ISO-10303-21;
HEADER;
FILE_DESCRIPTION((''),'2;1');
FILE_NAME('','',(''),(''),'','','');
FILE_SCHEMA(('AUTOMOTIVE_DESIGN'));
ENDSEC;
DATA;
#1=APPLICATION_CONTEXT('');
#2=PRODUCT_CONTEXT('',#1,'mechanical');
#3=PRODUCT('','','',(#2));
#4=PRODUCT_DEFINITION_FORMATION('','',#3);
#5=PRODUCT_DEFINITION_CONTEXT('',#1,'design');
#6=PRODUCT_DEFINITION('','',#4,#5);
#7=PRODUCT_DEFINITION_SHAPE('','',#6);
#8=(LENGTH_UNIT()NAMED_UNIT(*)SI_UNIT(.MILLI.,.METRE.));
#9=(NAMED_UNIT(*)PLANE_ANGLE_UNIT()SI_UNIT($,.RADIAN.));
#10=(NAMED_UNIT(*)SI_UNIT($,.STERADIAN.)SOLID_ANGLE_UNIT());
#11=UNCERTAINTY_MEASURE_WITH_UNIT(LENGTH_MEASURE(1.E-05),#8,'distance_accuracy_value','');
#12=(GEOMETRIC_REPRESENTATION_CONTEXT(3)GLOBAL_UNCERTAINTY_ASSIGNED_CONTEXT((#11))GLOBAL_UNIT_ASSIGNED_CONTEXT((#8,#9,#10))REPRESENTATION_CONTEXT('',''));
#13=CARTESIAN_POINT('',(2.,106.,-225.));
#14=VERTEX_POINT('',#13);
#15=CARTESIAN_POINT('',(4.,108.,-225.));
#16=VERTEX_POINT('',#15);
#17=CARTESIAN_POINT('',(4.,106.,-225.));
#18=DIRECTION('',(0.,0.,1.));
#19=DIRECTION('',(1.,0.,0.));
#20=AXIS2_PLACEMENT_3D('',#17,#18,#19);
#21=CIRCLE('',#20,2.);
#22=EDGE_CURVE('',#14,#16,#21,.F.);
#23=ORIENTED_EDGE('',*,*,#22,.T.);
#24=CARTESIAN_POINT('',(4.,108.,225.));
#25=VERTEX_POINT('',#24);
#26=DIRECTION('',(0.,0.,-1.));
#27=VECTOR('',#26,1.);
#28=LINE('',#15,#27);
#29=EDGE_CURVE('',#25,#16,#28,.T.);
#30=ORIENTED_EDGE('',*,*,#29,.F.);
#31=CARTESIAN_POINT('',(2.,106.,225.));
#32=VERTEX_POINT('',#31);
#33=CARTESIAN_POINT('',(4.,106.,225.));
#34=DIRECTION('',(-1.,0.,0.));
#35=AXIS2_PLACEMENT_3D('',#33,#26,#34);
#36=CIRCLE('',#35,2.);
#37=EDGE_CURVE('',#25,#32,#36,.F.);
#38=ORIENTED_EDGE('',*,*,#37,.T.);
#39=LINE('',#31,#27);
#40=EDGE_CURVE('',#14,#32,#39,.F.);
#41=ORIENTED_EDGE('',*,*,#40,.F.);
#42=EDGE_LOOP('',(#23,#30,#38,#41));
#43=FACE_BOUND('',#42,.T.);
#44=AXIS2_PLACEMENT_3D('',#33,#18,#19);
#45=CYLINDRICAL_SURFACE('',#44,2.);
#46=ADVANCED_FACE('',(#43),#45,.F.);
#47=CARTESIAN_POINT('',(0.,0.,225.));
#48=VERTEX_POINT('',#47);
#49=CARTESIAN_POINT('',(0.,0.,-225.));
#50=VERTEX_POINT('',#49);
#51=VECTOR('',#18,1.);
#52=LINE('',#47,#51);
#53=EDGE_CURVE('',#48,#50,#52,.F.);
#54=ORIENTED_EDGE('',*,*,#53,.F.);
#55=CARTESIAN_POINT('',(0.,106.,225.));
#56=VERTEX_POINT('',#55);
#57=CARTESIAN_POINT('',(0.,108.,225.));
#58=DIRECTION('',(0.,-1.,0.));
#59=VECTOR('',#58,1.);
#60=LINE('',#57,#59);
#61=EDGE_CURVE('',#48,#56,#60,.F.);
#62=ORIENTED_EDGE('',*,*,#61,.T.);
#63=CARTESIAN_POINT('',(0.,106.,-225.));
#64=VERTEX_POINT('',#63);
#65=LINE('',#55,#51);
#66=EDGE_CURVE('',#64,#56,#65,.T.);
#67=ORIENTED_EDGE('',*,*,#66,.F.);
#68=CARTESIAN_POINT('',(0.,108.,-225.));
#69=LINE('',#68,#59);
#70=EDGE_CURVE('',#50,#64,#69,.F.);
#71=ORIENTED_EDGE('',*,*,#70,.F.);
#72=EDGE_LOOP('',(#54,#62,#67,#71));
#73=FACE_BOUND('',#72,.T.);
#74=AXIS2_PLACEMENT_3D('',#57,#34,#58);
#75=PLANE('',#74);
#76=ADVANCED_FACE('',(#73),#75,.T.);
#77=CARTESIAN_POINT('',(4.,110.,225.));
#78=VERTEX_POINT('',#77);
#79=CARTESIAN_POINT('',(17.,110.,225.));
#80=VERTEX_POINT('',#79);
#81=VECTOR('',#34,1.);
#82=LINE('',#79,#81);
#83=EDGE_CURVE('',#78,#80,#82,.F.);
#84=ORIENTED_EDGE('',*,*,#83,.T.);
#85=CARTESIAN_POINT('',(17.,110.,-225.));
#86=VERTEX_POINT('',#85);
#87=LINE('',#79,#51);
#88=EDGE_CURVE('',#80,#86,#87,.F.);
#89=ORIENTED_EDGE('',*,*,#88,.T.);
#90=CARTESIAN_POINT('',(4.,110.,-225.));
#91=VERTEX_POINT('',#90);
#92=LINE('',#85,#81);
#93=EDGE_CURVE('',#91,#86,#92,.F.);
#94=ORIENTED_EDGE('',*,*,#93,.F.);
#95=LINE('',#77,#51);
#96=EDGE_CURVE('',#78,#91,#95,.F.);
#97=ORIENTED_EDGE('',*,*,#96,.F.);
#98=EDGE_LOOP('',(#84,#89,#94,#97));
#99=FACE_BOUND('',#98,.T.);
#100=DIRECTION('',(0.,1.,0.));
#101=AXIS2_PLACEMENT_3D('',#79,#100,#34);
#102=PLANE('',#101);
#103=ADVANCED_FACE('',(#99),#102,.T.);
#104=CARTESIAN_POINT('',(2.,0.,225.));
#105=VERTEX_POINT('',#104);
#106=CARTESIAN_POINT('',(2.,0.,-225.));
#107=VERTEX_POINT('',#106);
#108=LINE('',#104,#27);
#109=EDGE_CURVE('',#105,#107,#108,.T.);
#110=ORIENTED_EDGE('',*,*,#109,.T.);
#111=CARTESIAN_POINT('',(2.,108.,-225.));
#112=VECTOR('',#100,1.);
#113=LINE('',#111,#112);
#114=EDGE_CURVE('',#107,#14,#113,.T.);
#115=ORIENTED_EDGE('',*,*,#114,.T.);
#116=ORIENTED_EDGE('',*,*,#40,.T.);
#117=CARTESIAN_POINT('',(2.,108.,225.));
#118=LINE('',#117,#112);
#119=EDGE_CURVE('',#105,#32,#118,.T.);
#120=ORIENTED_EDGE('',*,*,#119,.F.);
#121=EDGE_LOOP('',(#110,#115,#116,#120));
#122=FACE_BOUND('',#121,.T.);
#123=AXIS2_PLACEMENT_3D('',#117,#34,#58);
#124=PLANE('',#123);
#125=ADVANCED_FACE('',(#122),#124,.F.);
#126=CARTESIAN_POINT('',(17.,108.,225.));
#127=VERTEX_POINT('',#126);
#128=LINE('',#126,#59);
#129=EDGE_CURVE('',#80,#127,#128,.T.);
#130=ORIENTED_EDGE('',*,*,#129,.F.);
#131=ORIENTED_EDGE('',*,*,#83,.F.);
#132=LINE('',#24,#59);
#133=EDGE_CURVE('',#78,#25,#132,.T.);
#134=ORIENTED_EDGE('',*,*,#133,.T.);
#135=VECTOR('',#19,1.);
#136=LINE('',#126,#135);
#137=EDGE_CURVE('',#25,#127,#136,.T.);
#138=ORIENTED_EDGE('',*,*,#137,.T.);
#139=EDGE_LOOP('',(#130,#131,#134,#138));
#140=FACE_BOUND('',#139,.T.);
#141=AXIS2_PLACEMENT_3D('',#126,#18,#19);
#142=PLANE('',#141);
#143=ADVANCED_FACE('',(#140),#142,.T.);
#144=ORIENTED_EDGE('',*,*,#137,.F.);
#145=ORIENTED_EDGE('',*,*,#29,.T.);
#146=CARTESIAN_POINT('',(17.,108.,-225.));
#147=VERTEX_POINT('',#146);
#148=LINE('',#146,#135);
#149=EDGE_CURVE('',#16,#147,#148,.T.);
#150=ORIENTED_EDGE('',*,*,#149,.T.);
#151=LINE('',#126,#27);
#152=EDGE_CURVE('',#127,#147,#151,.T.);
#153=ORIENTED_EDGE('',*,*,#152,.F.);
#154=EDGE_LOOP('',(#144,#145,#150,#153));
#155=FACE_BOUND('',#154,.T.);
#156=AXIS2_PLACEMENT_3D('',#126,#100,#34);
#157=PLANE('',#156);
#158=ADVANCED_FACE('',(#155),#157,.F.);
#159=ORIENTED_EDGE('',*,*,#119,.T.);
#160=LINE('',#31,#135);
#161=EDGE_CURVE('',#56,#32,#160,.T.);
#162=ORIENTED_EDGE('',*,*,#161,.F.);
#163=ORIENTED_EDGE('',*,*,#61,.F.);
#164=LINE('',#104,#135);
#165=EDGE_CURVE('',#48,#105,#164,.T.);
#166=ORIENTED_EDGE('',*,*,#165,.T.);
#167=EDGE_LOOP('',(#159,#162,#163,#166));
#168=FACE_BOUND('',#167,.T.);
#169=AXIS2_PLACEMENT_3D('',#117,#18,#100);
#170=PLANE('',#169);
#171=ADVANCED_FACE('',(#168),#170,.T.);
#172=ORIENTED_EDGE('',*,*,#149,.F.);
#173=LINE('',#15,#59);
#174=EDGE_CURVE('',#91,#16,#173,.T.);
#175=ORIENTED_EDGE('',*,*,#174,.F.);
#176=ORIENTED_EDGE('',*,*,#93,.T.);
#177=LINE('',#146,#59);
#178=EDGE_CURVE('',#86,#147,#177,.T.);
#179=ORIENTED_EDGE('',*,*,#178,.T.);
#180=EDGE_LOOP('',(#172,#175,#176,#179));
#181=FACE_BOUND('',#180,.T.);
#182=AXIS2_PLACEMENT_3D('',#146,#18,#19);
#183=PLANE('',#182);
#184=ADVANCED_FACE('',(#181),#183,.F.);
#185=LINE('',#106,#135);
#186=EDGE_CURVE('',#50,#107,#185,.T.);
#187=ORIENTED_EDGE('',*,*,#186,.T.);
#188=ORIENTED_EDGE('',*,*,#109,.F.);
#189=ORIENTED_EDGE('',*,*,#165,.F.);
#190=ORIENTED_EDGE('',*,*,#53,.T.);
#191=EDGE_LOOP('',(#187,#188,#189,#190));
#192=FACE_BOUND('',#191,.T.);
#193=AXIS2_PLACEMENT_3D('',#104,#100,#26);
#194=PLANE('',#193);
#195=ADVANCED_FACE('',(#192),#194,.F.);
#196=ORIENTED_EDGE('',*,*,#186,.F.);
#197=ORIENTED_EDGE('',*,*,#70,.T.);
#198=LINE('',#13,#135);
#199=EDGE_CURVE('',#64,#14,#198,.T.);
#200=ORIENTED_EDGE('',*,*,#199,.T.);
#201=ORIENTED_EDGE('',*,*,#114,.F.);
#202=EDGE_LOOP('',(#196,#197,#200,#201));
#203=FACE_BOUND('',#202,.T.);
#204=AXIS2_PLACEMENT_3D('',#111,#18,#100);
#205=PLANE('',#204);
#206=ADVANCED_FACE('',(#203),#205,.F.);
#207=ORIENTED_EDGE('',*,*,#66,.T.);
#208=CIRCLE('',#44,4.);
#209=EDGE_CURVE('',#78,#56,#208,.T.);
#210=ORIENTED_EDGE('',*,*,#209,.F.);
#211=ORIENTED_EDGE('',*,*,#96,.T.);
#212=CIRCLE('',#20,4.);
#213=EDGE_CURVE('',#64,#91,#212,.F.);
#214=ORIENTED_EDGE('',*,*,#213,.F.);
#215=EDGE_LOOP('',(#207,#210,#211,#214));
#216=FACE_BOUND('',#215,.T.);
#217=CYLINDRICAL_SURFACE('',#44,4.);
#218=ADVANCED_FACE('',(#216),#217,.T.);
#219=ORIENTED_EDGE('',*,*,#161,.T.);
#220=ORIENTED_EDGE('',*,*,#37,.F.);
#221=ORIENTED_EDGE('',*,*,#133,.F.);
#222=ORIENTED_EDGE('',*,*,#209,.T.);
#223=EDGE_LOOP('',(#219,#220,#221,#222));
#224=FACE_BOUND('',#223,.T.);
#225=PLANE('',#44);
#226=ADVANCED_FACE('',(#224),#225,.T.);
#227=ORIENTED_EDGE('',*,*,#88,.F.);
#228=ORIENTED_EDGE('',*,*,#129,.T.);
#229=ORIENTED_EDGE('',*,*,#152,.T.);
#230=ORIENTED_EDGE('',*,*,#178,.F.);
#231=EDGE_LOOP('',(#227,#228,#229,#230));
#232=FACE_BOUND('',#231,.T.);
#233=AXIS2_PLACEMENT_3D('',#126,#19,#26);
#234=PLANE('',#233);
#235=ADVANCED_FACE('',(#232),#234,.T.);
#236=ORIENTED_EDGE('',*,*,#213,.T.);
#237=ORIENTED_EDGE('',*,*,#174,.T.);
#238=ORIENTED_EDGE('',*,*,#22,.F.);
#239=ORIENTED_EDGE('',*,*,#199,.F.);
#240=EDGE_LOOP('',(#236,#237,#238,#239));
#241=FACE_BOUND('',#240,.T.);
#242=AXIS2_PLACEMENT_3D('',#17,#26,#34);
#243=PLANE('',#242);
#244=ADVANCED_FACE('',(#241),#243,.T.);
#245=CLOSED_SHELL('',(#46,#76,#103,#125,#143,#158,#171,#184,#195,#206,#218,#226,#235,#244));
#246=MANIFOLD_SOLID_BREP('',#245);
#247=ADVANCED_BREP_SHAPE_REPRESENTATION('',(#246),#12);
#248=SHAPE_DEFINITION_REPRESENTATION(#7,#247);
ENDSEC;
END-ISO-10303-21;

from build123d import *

# Parameters (mm, degrees)
BOSS_EXTRUDE1_DEPTH    = 225
CONVERT_SOLID1_START   = -225
CONVERT_SOLID1_DEPTH   = 450
CONVERT_SOLID1_2_DEPTH = 450


# Read off the part's stored shape, not the designer's step: Convert-Solid1
with BuildPart() as part:
    # Sketch1 → Boss-Extrude1 (new, symmetric)
    with BuildSketch(Plane.XY):
        Polygon((0, 0), (0, 110), (17, 110), (17, 108), (2, 108), (2, 0), align=None)
    extrude(amount=BOSS_EXTRUDE1_DEPTH, both=True)

    # Convert-Solid1 outline → Convert-Solid1 (cut)
    with BuildSketch(Plane.XY.offset(CONVERT_SOLID1_START)):
        with BuildLine():
            ThreePointArc((0, 106), (1.171572875, 108.828427125), (4, 110))
            Line((4, 110), (0, 110))
            Line((0, 110), (0, 106))
        make_face()
    extrude(amount=CONVERT_SOLID1_DEPTH, mode=Mode.SUBTRACT)

    # Convert-Solid1 2 outline → Convert-Solid1 2 (add)
    with BuildSketch(Plane.XY.offset(CONVERT_SOLID1_START)):
        with BuildLine():
            ThreePointArc((2, 106), (2.585786438, 107.414213562), (4, 108))
            Line((4, 108), (2, 108))
            Line((2, 108), (2, 106))
        make_face()
    extrude(amount=CONVERT_SOLID1_2_DEPTH)


solid = part.part
